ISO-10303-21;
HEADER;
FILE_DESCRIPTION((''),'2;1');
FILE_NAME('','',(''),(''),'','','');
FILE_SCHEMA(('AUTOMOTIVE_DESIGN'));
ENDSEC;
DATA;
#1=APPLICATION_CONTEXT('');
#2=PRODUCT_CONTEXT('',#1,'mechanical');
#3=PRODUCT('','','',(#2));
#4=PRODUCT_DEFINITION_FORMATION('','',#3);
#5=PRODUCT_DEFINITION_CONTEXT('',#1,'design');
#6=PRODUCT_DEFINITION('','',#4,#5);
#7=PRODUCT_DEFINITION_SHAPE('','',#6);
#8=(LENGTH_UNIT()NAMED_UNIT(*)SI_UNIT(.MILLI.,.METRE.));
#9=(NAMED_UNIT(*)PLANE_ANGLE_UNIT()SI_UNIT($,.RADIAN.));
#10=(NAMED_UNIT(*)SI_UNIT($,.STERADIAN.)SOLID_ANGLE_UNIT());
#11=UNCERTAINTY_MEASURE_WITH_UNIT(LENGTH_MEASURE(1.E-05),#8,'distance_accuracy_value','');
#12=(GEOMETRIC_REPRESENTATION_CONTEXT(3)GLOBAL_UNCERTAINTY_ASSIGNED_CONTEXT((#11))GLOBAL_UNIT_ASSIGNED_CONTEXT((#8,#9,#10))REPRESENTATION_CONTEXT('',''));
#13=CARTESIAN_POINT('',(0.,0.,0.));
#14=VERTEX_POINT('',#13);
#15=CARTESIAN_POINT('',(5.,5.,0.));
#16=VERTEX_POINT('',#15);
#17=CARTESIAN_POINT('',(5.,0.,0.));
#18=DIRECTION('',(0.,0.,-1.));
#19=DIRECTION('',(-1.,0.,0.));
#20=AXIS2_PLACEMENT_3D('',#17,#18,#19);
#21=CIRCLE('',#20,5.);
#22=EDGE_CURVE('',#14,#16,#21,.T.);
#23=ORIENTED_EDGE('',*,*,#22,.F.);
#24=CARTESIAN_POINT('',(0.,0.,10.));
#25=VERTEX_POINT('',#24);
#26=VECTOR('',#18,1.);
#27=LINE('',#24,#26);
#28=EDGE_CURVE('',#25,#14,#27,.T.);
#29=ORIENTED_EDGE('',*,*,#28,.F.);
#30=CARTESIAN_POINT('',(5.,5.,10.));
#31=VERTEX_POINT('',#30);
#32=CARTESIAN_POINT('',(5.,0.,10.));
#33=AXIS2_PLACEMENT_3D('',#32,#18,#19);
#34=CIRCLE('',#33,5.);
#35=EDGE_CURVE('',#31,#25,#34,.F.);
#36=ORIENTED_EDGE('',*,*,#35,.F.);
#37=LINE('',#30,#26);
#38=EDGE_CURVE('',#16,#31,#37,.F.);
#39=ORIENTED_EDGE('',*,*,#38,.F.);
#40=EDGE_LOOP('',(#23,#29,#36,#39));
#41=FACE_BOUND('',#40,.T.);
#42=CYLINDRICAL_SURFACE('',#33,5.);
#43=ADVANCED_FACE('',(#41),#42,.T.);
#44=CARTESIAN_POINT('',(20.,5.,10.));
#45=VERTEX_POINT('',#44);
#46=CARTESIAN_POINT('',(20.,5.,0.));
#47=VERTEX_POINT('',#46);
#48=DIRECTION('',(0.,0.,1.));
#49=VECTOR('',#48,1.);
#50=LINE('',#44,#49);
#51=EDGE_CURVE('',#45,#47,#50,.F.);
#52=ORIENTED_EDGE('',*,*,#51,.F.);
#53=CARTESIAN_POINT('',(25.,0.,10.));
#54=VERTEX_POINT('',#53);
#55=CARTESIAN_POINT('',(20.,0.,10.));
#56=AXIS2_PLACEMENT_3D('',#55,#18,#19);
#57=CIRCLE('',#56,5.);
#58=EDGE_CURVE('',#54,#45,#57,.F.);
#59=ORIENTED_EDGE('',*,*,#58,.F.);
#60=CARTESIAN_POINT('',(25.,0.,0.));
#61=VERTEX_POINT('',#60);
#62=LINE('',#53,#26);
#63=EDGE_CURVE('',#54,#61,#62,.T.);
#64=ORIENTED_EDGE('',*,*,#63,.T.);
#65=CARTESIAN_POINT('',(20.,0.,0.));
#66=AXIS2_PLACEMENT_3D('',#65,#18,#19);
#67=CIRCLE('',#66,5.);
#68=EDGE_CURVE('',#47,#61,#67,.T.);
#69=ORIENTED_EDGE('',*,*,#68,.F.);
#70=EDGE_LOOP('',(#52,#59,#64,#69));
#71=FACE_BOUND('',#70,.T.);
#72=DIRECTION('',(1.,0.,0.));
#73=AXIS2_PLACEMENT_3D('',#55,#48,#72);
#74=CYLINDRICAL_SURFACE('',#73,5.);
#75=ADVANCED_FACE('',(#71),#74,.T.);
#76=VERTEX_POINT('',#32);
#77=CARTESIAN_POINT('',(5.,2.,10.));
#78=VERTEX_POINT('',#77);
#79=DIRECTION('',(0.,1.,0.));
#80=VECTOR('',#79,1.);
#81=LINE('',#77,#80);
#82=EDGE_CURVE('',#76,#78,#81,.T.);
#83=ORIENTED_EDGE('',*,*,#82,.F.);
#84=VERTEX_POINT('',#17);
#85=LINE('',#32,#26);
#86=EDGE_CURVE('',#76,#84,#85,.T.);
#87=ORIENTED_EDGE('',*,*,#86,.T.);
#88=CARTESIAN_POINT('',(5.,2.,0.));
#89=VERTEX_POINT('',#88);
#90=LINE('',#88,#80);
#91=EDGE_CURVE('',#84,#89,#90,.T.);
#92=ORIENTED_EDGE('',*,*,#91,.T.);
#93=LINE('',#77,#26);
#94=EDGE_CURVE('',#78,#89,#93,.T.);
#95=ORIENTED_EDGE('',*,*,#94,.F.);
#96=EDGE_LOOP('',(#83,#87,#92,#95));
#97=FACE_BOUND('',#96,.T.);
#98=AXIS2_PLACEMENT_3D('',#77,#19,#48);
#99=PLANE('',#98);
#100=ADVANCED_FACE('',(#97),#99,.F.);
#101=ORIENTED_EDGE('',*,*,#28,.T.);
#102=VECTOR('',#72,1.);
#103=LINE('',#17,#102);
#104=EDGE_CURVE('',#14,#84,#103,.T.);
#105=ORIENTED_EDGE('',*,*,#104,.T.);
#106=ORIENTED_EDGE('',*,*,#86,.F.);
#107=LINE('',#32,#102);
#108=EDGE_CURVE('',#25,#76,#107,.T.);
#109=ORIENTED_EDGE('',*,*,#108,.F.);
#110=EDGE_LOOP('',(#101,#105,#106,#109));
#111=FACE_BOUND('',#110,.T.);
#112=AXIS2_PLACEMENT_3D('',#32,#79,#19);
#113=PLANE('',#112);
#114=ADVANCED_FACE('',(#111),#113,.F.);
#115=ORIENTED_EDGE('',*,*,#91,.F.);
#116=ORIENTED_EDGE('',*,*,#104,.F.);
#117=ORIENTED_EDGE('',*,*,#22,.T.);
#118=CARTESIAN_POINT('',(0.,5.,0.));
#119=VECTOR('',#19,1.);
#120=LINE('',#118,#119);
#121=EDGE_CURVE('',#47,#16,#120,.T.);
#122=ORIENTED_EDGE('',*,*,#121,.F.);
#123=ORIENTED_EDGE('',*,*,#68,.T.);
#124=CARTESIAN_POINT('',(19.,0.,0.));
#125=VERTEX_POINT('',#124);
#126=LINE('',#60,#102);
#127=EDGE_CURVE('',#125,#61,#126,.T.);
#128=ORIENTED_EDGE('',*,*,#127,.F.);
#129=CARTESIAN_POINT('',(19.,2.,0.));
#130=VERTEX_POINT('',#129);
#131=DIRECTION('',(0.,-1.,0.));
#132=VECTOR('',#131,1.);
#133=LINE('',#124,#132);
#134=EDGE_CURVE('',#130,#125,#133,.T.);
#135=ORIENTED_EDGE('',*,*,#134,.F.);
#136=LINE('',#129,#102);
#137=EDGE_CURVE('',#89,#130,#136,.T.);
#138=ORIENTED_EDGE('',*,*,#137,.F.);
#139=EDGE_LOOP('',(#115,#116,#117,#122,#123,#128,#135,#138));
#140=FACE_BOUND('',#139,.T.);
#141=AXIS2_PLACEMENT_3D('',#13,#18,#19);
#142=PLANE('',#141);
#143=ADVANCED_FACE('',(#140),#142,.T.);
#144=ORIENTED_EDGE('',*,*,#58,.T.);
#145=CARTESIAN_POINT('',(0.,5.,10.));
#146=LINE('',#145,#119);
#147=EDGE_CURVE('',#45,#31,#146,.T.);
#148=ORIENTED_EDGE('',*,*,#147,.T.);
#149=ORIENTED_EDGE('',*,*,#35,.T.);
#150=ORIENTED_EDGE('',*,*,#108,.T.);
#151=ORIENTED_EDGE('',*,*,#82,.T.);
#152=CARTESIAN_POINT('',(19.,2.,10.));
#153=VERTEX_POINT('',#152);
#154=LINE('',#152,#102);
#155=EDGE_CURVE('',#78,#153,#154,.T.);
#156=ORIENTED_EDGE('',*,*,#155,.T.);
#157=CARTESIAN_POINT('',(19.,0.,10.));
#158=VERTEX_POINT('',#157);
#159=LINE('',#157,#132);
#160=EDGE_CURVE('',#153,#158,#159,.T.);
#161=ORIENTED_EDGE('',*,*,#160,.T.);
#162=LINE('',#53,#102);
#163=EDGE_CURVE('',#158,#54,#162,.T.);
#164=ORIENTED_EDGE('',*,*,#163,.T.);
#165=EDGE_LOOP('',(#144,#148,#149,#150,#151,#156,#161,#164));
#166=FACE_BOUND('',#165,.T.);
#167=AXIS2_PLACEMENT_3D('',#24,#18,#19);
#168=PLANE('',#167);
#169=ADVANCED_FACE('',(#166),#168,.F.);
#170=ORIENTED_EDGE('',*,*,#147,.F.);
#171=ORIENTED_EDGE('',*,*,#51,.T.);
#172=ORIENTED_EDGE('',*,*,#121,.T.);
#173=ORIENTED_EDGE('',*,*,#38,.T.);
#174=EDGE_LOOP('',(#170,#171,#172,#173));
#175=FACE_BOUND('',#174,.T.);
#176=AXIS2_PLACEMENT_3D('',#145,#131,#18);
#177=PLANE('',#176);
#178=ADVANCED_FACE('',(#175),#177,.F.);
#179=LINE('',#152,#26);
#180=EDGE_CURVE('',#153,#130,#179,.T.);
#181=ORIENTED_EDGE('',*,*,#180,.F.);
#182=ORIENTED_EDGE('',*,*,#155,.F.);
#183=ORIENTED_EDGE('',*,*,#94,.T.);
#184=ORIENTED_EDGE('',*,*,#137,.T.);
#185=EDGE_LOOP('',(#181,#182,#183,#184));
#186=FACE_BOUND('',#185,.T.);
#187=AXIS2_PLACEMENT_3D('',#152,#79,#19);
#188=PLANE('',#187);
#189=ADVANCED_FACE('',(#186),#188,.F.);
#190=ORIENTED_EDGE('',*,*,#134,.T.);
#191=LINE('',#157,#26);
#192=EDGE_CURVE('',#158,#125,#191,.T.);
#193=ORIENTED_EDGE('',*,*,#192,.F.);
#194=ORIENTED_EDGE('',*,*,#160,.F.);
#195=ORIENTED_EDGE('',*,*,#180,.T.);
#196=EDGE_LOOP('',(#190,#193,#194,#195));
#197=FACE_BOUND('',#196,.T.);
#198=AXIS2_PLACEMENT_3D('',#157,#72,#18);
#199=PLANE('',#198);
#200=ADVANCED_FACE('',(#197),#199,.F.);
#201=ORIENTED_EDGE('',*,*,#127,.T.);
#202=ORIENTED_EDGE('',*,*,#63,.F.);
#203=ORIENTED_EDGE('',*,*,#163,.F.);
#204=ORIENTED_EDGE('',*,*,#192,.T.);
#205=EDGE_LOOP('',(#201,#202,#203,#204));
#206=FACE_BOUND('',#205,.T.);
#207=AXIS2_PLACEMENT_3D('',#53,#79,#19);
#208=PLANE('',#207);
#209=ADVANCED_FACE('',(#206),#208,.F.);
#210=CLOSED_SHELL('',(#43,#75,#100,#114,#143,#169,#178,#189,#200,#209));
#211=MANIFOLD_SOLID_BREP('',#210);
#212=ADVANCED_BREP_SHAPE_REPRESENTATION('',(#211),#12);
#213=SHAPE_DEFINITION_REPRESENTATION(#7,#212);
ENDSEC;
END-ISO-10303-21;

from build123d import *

# Parameters (mm, degrees)
BOSS_EXTRUDE1_DEPTH = 10
FILLET2_R           = 5
FILLET3_R           = 5


with BuildPart() as part:
    # Sketch1 → Boss-Extrude1 (new body)
    with BuildSketch(Plane.XY):
        Polygon((0, 0), (0, 5), (25, 5), (25, 0), (19, 0), (19, 2), (5, 2), (5, 0), align=None)
    extrude(amount=BOSS_EXTRUDE1_DEPTH)

    # Fillet2
    fillet2_edges = [part.edges().sort_by_distance(p)[0] for p in [
        (0, 5, 5),
    ]]
    fillet(fillet2_edges, radius=FILLET2_R - 0.0001)  # a hair under: the kernel refuses the full size

    # Fillet3
    fillet3_edges = [part.edges().sort_by_distance(p)[0] for p in [
        (25, 5, 5),
    ]]
    fillet(fillet3_edges, radius=FILLET3_R - 0.0001)  # a hair under: the kernel refuses the full size


solid = part.part
